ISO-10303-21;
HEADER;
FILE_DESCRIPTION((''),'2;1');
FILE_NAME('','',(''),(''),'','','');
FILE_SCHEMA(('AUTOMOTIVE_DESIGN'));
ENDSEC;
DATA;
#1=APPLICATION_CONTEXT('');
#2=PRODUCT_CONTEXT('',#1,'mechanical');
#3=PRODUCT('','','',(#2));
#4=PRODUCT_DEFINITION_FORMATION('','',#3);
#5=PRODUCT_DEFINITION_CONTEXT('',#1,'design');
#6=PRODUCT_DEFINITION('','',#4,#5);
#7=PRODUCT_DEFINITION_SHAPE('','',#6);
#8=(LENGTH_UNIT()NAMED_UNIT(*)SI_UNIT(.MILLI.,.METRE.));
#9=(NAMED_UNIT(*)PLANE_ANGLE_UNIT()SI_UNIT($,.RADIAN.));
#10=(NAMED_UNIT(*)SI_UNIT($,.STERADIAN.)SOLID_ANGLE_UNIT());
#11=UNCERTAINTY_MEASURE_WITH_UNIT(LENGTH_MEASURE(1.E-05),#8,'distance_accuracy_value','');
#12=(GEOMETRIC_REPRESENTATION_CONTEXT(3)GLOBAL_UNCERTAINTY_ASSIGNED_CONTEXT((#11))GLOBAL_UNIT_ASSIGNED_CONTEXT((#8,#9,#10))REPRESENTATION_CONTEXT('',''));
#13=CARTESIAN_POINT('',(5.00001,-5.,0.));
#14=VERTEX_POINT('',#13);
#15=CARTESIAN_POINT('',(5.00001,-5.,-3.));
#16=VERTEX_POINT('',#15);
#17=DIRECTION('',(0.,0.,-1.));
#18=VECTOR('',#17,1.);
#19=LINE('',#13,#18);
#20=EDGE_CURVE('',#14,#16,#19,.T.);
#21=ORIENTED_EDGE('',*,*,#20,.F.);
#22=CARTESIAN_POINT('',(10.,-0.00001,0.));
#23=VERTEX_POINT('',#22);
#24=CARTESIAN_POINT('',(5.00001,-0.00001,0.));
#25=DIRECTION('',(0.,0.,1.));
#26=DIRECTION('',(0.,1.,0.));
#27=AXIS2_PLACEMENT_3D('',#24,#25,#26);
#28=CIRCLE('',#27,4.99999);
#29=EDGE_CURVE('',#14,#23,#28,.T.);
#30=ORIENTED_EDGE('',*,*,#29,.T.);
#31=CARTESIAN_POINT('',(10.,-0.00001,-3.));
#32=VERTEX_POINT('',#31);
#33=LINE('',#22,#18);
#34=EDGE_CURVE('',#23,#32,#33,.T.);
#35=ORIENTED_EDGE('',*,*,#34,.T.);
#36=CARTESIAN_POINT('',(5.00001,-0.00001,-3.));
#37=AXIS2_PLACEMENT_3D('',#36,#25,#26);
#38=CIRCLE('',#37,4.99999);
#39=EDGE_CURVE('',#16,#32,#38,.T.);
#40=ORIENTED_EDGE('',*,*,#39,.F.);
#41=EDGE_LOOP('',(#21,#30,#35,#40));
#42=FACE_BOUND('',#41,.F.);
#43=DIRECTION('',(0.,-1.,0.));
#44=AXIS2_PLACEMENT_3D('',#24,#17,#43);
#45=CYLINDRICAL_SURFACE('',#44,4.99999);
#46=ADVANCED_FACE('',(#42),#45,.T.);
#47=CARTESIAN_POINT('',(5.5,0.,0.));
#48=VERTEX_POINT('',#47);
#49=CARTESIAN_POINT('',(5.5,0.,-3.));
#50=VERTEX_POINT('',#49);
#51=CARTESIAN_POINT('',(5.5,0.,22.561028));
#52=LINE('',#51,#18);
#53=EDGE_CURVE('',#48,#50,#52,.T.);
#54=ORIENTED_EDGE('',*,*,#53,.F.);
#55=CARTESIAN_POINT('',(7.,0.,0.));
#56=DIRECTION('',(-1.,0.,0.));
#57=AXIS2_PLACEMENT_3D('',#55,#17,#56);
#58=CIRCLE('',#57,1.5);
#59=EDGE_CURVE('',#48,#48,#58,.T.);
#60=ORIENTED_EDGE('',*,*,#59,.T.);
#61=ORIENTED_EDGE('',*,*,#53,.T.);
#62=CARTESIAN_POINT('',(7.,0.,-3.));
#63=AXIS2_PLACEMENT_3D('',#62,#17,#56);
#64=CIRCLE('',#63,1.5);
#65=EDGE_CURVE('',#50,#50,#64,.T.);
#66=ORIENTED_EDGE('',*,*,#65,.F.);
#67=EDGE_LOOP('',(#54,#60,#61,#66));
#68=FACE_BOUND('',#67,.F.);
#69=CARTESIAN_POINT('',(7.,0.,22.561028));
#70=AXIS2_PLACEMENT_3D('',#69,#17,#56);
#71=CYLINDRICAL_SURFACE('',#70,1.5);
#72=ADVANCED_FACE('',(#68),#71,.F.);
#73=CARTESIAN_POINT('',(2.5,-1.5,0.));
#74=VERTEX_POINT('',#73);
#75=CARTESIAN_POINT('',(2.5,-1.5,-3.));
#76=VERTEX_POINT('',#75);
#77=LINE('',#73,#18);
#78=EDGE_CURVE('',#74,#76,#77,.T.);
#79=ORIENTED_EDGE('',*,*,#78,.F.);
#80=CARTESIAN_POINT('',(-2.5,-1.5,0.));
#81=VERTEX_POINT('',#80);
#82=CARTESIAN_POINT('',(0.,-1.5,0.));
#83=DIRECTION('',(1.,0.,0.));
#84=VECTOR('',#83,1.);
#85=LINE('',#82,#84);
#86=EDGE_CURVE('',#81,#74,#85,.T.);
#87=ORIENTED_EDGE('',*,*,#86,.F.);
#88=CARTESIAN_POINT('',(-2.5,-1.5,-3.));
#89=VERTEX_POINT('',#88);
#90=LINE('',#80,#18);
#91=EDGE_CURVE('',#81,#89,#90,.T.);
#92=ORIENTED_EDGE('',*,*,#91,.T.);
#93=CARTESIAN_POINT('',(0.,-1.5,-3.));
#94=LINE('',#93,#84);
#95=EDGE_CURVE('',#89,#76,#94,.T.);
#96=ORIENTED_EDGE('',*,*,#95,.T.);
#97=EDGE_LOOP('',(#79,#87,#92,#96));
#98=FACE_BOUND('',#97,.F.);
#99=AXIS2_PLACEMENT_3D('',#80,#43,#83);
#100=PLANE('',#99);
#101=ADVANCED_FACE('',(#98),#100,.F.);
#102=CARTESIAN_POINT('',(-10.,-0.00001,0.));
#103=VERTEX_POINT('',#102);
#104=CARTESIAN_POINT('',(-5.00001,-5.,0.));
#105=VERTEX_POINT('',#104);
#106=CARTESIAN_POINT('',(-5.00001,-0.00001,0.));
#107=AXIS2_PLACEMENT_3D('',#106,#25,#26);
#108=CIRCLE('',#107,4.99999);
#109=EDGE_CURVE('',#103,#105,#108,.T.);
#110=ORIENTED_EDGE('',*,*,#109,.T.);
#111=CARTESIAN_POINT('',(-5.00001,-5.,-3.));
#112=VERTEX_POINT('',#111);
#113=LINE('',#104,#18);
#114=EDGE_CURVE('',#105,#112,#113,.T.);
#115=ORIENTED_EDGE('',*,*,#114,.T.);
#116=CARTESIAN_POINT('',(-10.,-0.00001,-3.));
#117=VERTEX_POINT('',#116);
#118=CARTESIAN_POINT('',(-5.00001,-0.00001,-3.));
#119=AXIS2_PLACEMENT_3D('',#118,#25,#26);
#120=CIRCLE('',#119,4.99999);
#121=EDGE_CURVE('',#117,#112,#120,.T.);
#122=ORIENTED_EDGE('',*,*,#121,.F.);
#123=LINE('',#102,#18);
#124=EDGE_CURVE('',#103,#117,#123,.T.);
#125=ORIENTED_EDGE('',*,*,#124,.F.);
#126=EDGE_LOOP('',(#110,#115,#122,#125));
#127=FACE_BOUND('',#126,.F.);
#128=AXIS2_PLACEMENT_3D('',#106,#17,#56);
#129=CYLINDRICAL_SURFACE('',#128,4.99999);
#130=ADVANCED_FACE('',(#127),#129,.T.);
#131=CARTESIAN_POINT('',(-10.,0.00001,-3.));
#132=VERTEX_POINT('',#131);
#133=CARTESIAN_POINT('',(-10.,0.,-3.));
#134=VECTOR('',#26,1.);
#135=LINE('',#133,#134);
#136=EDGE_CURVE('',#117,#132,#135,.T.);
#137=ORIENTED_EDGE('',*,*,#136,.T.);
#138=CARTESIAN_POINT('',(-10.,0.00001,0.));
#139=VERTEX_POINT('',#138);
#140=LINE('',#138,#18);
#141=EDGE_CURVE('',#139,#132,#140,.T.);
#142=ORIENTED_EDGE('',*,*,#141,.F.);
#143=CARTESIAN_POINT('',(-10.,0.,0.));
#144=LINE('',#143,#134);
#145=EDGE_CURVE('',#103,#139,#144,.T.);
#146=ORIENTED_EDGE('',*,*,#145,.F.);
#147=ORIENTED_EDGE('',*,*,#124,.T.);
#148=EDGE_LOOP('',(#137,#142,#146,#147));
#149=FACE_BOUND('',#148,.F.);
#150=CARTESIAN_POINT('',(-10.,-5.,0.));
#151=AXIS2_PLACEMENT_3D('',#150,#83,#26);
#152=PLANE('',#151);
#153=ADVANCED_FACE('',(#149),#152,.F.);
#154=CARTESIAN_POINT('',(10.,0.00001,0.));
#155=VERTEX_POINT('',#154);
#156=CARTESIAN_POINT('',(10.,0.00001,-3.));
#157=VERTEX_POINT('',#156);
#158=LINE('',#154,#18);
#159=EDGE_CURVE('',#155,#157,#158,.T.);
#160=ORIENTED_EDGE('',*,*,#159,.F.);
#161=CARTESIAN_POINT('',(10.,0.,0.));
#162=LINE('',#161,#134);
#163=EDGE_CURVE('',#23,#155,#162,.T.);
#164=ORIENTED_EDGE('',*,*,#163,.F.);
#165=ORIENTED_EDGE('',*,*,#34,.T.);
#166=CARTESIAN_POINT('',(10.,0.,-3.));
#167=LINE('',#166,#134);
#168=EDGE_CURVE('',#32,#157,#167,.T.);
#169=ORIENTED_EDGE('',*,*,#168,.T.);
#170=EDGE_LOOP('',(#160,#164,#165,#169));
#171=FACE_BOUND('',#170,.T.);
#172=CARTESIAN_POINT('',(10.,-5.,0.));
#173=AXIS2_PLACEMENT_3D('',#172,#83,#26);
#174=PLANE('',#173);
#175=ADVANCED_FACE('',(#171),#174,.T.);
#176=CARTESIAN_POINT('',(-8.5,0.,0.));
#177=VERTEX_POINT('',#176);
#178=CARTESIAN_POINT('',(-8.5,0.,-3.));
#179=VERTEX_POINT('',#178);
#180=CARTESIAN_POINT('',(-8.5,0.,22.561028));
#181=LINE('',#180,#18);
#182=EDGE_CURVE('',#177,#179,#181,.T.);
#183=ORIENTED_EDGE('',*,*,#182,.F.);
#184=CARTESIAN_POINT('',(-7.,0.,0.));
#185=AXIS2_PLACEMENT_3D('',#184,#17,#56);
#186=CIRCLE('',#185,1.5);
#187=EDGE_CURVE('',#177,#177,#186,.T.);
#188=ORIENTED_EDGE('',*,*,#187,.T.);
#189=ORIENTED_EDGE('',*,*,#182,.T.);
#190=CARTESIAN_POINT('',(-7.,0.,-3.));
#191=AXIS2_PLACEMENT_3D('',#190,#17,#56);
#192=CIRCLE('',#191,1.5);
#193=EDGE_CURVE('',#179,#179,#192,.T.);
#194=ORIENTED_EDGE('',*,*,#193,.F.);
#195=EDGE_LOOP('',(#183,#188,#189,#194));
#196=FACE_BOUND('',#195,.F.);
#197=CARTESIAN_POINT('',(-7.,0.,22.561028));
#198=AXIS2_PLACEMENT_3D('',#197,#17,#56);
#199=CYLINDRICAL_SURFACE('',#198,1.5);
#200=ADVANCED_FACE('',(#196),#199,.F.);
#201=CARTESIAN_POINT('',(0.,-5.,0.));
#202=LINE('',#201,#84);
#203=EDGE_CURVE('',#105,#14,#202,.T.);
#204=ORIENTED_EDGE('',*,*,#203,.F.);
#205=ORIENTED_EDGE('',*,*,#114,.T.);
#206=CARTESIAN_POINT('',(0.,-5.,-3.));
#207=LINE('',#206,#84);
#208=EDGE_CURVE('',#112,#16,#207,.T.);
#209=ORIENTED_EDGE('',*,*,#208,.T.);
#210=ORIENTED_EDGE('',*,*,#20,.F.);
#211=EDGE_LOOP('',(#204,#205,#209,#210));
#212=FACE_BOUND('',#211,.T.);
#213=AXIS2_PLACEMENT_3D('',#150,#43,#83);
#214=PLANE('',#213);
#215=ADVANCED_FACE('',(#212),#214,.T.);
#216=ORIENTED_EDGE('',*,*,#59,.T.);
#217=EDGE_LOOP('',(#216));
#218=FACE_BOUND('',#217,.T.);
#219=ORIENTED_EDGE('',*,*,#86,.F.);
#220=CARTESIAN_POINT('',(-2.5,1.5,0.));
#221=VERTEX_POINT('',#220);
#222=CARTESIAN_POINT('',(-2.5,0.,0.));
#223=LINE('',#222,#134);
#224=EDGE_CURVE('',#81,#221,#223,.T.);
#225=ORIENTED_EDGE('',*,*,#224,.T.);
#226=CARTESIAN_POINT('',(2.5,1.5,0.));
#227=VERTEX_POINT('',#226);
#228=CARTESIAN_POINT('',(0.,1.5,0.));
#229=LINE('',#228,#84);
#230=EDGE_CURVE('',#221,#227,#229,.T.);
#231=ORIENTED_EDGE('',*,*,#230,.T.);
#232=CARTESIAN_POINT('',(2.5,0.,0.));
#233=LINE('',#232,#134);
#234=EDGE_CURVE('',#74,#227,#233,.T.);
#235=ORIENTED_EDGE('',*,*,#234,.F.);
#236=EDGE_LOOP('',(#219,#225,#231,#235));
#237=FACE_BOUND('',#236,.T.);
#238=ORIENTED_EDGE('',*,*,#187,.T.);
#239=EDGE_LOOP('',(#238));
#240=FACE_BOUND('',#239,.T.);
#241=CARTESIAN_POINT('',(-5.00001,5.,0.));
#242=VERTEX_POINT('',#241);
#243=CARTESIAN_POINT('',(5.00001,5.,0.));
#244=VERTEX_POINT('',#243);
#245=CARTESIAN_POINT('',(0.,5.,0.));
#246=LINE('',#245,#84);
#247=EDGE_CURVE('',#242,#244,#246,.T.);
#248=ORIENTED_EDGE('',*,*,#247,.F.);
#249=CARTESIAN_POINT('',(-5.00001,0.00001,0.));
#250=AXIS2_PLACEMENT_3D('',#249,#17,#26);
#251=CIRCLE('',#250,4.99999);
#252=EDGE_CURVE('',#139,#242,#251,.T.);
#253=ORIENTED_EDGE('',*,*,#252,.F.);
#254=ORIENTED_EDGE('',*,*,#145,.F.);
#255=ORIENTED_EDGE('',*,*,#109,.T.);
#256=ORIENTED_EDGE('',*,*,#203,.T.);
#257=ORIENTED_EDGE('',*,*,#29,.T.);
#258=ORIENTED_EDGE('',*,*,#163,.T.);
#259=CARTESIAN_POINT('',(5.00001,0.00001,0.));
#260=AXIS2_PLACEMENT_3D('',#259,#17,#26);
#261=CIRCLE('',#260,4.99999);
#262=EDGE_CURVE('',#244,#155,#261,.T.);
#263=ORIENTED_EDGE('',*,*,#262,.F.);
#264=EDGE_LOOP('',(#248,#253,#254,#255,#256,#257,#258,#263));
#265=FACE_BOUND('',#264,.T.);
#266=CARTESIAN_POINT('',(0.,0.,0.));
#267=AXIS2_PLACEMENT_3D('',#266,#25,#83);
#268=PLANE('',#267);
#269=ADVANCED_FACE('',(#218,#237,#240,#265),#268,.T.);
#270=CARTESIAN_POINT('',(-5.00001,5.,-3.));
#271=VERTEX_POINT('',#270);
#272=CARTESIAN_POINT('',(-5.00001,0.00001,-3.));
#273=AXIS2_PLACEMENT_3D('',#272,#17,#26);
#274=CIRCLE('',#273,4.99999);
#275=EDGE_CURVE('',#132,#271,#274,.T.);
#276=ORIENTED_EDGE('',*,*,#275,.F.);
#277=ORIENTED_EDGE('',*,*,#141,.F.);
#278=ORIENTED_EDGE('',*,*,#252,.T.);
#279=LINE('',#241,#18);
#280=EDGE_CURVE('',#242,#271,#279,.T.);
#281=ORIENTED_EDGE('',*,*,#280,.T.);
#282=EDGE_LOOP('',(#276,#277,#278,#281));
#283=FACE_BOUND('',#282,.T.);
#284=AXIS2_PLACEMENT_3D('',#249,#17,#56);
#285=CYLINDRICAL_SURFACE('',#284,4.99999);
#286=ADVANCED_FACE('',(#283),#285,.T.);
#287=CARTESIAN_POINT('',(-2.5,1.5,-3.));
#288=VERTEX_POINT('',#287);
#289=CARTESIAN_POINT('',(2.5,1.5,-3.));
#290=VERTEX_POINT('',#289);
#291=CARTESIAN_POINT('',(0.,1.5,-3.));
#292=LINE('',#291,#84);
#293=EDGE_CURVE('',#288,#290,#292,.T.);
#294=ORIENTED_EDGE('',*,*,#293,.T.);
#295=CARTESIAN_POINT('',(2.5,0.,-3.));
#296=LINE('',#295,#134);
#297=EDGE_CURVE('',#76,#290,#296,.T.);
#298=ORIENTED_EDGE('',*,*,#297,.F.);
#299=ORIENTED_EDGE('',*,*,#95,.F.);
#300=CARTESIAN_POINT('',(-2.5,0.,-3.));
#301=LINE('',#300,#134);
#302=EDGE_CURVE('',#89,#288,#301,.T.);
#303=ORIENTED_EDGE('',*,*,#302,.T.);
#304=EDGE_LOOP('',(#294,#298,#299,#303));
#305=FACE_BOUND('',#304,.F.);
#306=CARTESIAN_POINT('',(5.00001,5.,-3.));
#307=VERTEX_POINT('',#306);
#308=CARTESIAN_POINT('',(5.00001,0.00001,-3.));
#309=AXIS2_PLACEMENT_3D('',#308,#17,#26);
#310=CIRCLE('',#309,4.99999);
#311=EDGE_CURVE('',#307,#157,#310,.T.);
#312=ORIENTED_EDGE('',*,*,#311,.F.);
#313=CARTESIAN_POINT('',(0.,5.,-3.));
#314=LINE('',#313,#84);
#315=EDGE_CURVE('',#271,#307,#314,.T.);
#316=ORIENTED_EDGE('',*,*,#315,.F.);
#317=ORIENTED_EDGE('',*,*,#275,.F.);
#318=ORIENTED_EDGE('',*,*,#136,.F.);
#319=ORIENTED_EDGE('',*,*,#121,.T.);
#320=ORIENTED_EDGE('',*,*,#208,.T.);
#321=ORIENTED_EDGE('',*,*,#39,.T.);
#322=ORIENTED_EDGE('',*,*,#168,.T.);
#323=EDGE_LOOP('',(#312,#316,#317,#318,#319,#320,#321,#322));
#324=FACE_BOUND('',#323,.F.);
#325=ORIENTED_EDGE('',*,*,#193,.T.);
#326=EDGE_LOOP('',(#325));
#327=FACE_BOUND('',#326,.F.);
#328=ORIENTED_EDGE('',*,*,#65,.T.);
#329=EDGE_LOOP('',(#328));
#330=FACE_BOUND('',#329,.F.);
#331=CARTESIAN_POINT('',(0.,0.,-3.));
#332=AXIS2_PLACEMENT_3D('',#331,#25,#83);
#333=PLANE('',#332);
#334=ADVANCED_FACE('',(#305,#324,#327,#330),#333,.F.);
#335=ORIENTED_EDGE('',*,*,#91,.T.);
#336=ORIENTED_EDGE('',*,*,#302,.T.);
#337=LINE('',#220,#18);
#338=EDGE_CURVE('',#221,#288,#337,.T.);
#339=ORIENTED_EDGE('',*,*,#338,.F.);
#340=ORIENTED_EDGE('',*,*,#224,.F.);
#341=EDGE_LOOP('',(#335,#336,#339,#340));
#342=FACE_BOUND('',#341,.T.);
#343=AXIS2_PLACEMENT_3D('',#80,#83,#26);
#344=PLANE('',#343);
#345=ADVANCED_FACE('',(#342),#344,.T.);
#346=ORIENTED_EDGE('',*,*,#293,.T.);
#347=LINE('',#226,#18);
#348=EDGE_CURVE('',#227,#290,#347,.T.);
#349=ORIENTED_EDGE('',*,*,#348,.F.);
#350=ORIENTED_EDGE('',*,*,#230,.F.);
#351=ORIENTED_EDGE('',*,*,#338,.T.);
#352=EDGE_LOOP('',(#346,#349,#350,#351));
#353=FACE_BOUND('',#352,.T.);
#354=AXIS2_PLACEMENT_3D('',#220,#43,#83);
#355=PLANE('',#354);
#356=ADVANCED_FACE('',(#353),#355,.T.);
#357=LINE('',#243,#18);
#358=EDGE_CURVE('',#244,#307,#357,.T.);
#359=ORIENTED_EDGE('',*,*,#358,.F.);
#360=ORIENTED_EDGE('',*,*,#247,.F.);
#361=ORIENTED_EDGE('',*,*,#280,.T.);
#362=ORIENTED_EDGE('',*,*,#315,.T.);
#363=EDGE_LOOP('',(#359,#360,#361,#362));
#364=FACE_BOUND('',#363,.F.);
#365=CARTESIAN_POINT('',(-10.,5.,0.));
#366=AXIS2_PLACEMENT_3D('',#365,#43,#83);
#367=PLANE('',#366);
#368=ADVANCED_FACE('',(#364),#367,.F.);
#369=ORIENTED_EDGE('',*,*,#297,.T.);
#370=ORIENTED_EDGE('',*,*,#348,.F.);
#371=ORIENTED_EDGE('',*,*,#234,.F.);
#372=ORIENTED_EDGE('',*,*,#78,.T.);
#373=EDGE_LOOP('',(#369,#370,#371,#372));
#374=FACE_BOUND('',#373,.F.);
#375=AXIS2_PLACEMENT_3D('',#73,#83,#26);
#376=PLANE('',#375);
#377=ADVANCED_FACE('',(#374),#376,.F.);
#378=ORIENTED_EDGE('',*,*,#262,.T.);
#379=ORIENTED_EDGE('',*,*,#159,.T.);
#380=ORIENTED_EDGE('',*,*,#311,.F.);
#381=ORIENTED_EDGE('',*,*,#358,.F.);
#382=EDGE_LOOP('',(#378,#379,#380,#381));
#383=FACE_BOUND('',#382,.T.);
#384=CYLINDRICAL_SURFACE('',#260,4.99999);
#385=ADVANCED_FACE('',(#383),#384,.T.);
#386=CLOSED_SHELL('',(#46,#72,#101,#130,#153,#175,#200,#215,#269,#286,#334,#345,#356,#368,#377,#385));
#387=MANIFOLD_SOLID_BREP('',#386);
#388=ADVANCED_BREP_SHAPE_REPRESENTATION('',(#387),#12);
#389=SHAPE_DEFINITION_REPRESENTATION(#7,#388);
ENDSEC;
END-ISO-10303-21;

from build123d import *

# Parameters (mm, degrees)
F0_W     = 20
F0_H     = 10
F0_W_2   = 5
F0_H_2   = 3
F1_DEPTH = 3
F2_R     = 4.99999
F4_D     = 3


# Not quite as in the source:
# - a fillet or chamfer is up to 0.001 mm smaller than in the source, because OpenCascade refuses the exact size


with BuildPart() as f1:
    # F0 (on Top) → F1 (new body)
    with BuildSketch(Plane.XY):
        Rectangle(F0_W, F0_H)
        Rectangle(F0_W_2, F0_H_2, mode=Mode.SUBTRACT)
    extrude(amount=-F1_DEPTH)

    # F2 (radius 5 in the source; OpenCascade refuses exactly that, so slightly less here)
    f2_edges = [f1.edges().sort_by_distance(p)[0] for p in [
        (-10, -5, -1.5),
        (-10, 5, -1.5),
        (10, -5, -1.5),
        (10, 5, -1.5),
    ]]
    fillet(f2_edges, radius=F2_R)

    # F4 (through all)
    with Locations(Plane.XY):
        with Locations((-7, 0), (7, 0)):
            Hole(F4_D / 2)


solid = f1.part
